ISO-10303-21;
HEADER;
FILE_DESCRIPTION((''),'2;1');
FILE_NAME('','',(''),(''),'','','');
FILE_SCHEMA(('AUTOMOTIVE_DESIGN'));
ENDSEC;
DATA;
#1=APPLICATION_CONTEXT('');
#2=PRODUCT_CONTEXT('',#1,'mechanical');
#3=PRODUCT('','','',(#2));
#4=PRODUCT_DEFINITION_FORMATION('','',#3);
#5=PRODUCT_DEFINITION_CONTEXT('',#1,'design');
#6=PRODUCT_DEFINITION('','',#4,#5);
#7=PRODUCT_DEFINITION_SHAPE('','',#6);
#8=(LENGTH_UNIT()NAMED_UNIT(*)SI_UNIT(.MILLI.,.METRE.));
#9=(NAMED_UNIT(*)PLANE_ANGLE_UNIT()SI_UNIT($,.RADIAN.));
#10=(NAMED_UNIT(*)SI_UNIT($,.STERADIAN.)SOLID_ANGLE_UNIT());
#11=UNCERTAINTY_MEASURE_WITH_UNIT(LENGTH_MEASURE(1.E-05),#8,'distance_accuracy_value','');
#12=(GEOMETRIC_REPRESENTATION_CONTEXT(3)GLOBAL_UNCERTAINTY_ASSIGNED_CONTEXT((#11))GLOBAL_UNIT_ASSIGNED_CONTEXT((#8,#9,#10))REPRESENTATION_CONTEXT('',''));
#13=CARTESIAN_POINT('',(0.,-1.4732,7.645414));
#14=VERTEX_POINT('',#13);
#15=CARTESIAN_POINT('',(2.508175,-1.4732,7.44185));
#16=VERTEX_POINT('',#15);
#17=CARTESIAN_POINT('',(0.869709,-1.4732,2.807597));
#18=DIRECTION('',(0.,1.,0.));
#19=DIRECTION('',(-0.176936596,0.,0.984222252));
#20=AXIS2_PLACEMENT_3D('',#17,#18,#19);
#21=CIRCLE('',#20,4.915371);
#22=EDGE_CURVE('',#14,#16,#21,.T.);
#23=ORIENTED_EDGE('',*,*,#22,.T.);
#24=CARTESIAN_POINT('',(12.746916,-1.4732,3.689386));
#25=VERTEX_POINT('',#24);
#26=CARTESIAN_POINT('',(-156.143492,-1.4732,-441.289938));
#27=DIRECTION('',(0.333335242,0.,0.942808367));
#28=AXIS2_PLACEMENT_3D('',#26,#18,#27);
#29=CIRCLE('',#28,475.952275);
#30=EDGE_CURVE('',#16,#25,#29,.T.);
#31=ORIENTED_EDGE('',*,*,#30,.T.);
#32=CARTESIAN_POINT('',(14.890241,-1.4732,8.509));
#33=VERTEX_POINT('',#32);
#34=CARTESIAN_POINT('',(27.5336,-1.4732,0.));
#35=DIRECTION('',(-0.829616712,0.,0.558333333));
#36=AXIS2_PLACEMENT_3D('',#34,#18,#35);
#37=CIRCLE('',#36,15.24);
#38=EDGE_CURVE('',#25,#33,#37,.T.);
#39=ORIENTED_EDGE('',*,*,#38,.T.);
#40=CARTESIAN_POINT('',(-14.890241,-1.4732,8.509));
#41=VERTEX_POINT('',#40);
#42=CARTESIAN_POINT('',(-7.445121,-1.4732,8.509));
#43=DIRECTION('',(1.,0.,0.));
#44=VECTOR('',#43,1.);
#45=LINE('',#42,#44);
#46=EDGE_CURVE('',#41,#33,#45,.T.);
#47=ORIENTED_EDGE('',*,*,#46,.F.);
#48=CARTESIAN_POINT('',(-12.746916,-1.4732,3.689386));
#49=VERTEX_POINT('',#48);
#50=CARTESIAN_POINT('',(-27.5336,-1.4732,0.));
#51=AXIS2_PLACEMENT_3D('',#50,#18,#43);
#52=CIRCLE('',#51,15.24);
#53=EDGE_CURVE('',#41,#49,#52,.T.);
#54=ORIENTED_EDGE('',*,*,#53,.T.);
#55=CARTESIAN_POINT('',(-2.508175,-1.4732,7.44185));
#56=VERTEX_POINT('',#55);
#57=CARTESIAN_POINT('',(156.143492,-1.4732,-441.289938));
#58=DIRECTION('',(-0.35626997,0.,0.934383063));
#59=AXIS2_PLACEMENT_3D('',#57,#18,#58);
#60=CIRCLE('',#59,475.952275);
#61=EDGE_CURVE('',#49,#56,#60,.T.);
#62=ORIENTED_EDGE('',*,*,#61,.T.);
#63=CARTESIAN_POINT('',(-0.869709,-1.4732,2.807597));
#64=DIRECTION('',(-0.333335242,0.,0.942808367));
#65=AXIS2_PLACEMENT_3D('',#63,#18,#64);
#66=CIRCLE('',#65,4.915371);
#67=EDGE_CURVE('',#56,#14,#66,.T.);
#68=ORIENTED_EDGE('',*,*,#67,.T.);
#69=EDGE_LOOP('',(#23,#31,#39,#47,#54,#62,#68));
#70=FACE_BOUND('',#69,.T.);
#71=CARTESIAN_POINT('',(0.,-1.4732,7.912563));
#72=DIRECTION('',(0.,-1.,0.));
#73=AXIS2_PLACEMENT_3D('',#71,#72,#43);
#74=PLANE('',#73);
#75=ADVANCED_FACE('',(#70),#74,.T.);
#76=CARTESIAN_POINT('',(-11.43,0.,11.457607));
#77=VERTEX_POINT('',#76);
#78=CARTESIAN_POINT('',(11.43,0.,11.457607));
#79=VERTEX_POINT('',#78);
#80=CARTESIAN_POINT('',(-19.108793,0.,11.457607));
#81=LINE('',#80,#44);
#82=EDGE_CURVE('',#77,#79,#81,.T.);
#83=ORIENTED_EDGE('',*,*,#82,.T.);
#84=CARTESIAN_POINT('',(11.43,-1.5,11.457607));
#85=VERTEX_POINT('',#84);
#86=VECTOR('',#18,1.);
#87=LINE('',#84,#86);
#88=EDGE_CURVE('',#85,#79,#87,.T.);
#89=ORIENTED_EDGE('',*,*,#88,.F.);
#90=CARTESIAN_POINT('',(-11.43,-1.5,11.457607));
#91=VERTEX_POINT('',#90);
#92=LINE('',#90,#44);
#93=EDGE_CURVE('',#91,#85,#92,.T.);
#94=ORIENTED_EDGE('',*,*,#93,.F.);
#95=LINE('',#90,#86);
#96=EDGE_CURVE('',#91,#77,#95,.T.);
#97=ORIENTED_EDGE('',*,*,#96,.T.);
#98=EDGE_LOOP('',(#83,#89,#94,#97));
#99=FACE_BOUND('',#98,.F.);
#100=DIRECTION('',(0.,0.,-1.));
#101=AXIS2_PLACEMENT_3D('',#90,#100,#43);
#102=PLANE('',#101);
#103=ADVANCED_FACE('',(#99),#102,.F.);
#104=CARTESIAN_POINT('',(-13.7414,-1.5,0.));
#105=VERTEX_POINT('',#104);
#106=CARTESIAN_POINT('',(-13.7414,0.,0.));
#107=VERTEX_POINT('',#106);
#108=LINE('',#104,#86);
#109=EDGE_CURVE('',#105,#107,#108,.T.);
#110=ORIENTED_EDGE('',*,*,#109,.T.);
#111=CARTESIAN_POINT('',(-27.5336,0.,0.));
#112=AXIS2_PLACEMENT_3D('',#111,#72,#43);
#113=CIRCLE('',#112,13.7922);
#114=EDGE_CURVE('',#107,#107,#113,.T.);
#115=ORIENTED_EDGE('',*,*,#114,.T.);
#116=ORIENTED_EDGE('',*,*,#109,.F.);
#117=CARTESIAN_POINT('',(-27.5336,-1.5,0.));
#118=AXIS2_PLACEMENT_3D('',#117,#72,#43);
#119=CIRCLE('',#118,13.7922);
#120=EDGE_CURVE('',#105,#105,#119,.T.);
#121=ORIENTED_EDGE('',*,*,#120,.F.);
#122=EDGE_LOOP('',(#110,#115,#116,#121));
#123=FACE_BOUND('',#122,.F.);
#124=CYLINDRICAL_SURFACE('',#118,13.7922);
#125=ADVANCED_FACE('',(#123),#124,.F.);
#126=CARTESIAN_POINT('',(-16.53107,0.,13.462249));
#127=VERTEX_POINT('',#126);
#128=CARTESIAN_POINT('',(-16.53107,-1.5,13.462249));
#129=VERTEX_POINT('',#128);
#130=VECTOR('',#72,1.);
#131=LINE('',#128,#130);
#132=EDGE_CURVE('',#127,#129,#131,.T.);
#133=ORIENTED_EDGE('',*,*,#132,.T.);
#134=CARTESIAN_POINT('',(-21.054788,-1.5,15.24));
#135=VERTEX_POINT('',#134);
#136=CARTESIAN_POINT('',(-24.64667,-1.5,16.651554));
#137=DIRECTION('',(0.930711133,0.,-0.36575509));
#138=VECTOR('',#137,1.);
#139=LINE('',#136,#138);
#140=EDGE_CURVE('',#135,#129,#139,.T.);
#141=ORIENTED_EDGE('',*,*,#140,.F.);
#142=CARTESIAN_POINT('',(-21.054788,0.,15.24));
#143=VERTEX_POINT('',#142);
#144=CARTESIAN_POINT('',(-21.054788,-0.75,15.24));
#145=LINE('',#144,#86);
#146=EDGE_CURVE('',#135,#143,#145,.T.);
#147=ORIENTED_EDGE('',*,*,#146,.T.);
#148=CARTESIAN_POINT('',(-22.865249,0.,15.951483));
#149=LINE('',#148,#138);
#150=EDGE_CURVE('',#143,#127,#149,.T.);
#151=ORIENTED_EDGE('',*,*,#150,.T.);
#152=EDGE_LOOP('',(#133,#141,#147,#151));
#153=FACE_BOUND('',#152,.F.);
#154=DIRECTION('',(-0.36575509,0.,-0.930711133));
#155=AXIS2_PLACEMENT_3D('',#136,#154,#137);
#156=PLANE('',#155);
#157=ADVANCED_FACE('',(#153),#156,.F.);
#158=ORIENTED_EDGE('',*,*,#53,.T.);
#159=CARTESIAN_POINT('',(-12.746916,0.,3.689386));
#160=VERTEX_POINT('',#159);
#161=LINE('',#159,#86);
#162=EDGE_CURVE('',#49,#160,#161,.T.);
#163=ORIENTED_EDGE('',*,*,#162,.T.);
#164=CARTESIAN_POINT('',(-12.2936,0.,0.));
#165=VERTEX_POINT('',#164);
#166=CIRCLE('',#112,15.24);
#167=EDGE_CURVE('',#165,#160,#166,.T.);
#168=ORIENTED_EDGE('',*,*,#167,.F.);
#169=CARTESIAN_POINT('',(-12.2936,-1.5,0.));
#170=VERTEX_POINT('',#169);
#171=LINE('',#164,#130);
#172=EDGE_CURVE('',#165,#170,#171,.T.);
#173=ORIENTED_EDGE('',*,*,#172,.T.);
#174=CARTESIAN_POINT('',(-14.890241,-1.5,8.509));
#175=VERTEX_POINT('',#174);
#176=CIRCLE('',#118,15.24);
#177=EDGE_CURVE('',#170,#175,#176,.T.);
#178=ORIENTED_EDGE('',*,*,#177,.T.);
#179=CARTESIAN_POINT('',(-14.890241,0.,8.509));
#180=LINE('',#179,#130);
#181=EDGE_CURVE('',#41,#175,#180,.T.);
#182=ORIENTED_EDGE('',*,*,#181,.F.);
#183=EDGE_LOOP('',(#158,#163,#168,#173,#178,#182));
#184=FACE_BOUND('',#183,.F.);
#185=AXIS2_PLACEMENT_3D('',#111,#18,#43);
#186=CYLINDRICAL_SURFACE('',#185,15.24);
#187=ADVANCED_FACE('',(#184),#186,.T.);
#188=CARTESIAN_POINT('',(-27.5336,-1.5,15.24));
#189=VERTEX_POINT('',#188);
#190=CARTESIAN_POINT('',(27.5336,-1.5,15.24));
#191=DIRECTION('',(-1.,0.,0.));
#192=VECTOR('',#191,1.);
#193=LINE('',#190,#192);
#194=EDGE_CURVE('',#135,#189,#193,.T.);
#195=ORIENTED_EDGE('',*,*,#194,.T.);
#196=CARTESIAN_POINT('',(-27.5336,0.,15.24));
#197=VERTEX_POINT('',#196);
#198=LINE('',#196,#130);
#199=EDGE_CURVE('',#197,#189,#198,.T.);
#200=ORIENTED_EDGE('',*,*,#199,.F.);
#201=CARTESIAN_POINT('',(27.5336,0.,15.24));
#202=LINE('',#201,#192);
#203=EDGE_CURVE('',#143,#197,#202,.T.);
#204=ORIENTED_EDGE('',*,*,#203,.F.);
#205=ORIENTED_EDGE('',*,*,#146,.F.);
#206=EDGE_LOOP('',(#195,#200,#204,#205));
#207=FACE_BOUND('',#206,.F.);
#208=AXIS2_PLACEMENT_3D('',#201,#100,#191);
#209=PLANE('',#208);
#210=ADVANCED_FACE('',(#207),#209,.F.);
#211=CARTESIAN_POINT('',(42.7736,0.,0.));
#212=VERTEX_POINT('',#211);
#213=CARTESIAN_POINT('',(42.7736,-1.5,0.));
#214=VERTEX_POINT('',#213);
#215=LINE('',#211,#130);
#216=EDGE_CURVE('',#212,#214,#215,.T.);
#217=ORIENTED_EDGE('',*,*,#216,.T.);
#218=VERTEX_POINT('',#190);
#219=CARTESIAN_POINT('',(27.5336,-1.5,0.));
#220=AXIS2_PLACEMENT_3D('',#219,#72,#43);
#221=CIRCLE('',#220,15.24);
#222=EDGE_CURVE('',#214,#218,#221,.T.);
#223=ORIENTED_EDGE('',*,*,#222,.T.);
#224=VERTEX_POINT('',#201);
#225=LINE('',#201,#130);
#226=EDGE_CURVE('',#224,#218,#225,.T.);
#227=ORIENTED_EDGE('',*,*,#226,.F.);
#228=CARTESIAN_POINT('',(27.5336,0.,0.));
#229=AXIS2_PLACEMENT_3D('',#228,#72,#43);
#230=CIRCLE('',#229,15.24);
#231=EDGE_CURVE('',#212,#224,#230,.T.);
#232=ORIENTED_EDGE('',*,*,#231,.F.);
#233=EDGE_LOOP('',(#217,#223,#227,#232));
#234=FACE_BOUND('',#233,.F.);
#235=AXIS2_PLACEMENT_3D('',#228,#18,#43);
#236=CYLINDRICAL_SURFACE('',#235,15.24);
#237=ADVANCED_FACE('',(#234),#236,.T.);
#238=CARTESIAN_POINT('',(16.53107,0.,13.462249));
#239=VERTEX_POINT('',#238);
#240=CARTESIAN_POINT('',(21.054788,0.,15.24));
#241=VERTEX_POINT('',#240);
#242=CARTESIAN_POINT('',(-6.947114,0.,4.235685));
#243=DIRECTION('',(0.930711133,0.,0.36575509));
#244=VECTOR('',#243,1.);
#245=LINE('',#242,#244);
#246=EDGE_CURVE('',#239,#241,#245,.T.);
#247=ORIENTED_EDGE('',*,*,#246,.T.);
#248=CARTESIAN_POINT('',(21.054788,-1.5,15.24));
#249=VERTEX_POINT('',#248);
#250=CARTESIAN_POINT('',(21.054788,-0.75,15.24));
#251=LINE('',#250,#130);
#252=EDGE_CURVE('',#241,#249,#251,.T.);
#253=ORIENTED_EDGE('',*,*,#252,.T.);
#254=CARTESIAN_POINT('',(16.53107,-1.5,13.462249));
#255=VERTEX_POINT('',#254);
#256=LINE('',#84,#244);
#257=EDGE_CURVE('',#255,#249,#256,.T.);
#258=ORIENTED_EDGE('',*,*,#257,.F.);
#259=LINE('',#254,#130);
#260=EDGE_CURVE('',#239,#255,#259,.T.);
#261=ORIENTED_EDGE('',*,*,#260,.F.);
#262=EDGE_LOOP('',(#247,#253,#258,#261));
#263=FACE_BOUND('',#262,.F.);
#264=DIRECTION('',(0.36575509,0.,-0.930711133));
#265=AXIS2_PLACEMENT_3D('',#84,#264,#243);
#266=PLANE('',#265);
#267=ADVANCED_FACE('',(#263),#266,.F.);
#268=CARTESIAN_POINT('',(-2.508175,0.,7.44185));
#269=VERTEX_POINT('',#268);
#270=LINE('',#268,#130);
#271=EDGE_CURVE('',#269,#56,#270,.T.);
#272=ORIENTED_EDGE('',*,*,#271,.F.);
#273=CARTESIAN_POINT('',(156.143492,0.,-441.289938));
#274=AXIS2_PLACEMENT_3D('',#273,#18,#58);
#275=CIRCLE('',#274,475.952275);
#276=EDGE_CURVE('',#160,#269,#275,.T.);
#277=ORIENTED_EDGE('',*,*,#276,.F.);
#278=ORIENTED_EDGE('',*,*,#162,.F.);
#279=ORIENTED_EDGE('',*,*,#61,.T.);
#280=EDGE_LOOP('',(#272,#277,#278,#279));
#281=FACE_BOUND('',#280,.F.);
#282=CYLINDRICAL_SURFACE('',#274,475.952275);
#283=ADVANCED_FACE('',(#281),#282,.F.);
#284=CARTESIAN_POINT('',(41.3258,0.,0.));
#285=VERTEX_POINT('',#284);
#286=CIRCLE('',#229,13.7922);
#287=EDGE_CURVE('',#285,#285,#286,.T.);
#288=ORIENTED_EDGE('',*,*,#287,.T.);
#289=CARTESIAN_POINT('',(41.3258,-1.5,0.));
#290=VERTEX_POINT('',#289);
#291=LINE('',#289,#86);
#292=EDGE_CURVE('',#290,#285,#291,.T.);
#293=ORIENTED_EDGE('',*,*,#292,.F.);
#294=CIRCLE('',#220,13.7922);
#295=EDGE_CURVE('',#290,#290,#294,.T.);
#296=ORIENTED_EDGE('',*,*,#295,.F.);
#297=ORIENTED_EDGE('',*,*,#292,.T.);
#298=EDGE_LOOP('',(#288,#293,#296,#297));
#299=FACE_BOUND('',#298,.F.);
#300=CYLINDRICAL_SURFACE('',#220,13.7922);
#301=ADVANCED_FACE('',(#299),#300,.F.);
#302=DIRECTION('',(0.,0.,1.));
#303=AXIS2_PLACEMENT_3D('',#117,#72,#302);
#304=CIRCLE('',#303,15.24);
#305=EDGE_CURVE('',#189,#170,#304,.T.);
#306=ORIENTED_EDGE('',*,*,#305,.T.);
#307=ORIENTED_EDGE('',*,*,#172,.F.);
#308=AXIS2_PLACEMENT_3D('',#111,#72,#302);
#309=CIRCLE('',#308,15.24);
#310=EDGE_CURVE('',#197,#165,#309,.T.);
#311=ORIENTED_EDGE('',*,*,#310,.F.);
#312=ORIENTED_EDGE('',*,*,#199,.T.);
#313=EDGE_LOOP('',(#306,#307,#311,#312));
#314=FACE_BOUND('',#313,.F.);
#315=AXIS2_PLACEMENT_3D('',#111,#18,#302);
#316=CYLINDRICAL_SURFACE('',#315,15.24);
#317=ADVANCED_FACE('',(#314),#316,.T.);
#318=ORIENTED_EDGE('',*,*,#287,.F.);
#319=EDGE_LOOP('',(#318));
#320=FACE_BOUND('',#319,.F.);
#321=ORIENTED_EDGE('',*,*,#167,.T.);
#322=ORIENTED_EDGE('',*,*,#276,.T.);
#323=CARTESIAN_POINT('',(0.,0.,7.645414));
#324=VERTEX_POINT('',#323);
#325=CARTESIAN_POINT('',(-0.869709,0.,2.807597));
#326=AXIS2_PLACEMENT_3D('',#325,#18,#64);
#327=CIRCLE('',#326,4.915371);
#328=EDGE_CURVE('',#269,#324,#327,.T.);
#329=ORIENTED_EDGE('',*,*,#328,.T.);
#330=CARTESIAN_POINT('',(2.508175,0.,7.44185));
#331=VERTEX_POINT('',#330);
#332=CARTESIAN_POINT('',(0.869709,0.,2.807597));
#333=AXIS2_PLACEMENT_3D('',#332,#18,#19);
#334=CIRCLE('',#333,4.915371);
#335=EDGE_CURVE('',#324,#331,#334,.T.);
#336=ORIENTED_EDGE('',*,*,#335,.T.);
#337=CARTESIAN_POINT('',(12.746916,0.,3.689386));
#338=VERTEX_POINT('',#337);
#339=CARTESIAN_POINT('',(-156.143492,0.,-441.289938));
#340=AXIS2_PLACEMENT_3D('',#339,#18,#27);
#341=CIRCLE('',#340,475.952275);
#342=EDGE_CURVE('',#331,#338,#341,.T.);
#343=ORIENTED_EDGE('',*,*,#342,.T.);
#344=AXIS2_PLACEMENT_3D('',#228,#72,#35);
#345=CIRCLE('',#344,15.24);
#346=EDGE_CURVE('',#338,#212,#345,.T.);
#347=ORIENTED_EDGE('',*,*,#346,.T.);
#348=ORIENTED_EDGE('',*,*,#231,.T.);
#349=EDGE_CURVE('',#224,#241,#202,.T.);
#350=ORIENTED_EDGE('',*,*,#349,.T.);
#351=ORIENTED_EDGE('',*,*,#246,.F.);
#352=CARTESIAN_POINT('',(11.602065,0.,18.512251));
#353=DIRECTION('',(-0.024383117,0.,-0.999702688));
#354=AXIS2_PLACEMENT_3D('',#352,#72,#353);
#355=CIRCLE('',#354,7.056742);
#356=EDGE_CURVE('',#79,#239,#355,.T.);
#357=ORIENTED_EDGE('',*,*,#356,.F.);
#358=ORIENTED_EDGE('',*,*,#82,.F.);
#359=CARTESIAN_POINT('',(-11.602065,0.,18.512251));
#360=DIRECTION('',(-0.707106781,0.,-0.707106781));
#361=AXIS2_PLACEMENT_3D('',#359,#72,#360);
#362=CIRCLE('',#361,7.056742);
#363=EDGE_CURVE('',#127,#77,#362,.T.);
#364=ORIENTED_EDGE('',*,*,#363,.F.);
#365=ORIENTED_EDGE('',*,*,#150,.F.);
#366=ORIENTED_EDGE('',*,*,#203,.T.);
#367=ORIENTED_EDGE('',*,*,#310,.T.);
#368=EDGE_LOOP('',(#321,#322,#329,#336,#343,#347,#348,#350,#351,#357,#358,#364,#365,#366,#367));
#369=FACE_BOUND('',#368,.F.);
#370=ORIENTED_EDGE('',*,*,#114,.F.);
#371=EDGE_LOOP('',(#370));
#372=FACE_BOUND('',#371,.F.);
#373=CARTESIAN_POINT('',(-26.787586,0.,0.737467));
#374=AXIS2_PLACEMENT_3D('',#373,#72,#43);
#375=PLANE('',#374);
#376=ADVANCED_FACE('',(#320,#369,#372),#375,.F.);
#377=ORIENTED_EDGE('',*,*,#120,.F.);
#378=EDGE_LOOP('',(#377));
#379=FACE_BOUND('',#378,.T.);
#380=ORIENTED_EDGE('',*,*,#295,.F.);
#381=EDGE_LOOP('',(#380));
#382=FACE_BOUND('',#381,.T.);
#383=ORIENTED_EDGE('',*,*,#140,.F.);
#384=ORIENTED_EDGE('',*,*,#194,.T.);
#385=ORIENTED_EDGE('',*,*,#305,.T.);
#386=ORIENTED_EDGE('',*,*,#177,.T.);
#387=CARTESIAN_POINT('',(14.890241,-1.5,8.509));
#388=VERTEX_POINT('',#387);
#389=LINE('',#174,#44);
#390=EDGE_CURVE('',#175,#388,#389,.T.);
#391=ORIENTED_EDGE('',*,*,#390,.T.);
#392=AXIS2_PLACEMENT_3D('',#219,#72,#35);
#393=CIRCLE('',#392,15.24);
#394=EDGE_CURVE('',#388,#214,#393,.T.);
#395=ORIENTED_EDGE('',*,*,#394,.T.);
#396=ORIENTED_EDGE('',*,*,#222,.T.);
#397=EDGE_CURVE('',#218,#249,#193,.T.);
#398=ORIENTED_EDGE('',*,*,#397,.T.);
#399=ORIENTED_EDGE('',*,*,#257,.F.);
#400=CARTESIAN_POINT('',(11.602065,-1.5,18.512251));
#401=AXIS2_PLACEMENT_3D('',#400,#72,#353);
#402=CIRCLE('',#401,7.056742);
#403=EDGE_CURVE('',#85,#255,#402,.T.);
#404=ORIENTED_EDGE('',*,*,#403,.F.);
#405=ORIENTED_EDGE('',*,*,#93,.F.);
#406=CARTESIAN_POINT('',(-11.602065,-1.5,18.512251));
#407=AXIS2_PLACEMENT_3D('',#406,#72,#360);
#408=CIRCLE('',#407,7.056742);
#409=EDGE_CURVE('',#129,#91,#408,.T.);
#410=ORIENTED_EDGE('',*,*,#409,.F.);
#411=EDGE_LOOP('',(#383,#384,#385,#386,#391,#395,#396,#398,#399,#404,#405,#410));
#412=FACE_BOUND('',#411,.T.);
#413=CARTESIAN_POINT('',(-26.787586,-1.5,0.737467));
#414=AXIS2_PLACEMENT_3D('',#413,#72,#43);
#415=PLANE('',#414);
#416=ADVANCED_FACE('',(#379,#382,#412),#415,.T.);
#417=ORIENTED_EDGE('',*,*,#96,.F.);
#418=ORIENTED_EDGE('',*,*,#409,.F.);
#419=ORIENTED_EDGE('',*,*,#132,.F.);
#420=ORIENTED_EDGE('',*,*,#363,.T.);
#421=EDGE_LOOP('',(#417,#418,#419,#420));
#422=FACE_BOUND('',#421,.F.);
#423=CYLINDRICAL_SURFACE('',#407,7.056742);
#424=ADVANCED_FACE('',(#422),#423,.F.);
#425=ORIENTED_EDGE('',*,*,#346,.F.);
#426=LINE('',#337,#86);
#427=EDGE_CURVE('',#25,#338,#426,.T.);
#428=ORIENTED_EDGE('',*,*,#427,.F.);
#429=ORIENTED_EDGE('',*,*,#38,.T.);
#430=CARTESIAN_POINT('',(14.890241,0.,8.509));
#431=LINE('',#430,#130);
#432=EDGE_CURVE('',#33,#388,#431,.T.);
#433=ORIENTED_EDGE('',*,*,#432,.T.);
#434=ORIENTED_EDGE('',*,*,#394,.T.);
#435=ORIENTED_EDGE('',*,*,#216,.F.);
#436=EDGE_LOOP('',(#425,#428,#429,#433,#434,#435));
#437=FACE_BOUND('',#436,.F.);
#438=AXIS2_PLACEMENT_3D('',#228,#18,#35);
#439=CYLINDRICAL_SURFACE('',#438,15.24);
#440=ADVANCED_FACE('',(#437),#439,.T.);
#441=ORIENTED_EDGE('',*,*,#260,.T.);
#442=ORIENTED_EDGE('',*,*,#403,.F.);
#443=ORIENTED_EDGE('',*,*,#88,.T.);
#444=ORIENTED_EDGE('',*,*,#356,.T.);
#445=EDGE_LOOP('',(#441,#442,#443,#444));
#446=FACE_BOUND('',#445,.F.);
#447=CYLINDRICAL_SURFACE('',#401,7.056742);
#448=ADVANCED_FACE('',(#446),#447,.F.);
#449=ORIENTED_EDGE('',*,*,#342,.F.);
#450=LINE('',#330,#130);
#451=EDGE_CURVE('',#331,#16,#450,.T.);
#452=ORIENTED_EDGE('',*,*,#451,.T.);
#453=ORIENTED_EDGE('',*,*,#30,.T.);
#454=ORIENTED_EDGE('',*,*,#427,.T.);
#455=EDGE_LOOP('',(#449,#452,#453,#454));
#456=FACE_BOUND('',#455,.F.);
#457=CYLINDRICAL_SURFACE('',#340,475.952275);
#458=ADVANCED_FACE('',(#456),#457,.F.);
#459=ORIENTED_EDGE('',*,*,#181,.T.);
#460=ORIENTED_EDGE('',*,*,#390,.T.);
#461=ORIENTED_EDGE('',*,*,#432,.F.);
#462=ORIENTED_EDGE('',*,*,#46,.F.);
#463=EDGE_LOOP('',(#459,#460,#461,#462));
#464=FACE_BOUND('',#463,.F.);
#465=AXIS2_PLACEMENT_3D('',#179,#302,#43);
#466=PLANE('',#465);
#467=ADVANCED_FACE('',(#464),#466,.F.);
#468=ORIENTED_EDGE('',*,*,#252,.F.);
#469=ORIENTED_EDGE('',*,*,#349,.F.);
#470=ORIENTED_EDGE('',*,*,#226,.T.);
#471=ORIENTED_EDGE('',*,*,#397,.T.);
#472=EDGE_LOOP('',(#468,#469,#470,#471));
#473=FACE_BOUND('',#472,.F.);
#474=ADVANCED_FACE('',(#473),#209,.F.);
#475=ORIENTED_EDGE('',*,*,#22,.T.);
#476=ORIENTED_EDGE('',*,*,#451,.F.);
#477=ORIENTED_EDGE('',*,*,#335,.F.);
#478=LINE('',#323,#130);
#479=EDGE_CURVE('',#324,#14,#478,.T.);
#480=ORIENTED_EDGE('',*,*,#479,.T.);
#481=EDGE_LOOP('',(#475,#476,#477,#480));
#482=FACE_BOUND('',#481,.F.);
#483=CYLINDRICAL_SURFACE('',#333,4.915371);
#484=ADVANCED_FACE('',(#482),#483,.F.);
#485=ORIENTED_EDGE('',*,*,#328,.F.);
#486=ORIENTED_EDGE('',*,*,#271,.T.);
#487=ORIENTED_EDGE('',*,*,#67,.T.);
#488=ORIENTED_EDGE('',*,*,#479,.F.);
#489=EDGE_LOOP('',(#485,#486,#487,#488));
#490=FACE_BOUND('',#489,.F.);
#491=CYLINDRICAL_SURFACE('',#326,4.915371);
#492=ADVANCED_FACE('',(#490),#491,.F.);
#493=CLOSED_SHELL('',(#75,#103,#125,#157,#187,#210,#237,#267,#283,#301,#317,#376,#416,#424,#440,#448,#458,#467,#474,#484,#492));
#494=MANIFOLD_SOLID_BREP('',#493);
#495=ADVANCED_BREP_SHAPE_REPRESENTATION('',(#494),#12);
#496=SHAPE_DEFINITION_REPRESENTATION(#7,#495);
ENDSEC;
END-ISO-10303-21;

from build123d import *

# Parameters (mm, degrees)
F1_DEPTH = 1.5
F2_R     = 13.7922
F3_DEPTH = 25.4
F5_DEPTH = 25.4
F8_DEPTH = 1.4732


# Not quite as in the source:
# - a variable given as a bare number and used for a length is read in inches; the dataset says mm whatever the document's units were


with BuildPart() as f1:
    # F0 (on Front) → F1 (new body)
    with BuildSketch(Plane.XZ):
        with BuildLine():
            ThreePointArc((-27.5336, 15.24), (-38.3099073453, -10.7763073453), (-12.2936, 0))
            ThreePointArc((-12.2936, 0), (-12.9572083605, 4.4481914045), (-14.8902413086, 8.509))
            ThreePointArc((-14.8902413086, 8.509), (-20.3718809326, 13.4524116797), (-27.5336, 15.24))
        make_face()
        with BuildLine():
            ThreePointArc((-27.5336, 15.24), (-20.3718809326, 13.4524116797), (-14.8902413086, 8.509))
            Line((-14.8902413086, 8.509), (14.8902413086, 8.509))
            ThreePointArc((14.8902413086, 8.509), (20.3718809326, 13.4524116797), (27.5336, 15.24))
            Line((27.5336, 15.24), (-27.5336, 15.24))
        make_face()
        with BuildLine():
            ThreePointArc((27.5336, 15.24), (20.3718809326, 13.4524116797), (14.8902413086, 8.509))
            ThreePointArc((14.8902413086, 8.509), (23.0854085955, -14.5763916395), (42.7736, 0))
            ThreePointArc((42.7736, 0), (38.3099073453, 10.7763073453), (27.5336, 15.24))
        make_face()
    extrude(amount=F1_DEPTH)

    # F2 (on face) → F3 (cut)
    with BuildSketch(Plane.XZ.offset(1.5)):
        with Locations((-27.5336, 0)):
            Circle(F2_R)
        with Locations((27.5336, 0)):
            Circle(F2_R)
        with BuildLine():
            Line((0, 40.3644442558), (-21.547392987, 18.4778384864))
            Line((-21.547392987, 18.4778384864), (-16.5919354635, 13.522380963))
            ThreePointArc((-16.5919354635, 13.522380963), (-14.2228731292, 11.9602304674), (-11.43, 11.4576071501))
            Line((-11.43, 11.4576071501), (0, 11.4576071501))
            Line((0, 11.4576071501), (0, 40.3644442558))
        make_face()
        with BuildLine():
            Line((21.547392987, 18.4778384864), (0, 40.3644442558))
            Line((0, 40.3644442558), (0, 11.4576071501))
            Line((0, 11.4576071501), (11.43, 11.4576071501))
            ThreePointArc((11.43, 11.4576071501), (14.2228731292, 11.9602304674), (16.5919354635, 13.522380963))
            Line((16.5919354635, 13.522380963), (21.547392987, 18.4778384864))
        make_face()
    extrude(amount=-F3_DEPTH, mode=Mode.SUBTRACT)

    # F4 (on face) → F5 (cut)
    with BuildSketch(Plane.XZ.offset(1.5)):
        Polygon((-9.2328525533, 17.0485330061), (-24.6466696262, 16.6515540332), (-11.43, 11.4576071501), align=None)
        Polygon((11.43, 11.4576071501), (24.6466696262, 16.6515540332), (9.2328525533, 17.0485330061), align=None)
    extrude(amount=-F5_DEPTH, mode=Mode.SUBTRACT)

    # F7 (on Front) → F8 (join)
    with BuildSketch(Plane.XZ):
        with BuildLine():
            ThreePointArc((-17.6120530814, 10.0212339312), (-15.0131826274, 7.0473877292), (-13.4240113708, 3.4318070584))
            ThreePointArc((-13.4240113708, 3.4318070584), (-7.9783410744, 5.4701683575), (-2.5081751928, 7.4418496173))
            ThreePointArc((-2.5081751928, 7.4418496173), (-1.2673351307, 7.7068584172), (0, 7.6454142109))
            ThreePointArc((0, 7.6454142109), (1.2673351307, 7.7068584172), (2.5081751928, 7.4418496173))
            ThreePointArc((2.5081751928, 7.4418496173), (7.9783410744, 5.4701683575), (13.4240113708, 3.4318070584))
            ThreePointArc((13.4240113708, 3.4318070584), (15.0131826274, 7.0473877292), (17.6120530814, 10.0212339312))
            Line((17.6120530814, 10.0212339312), (-17.6120530814, 10.0212339312))
        make_face()
    extrude(amount=F8_DEPTH)


solid = f1.part
